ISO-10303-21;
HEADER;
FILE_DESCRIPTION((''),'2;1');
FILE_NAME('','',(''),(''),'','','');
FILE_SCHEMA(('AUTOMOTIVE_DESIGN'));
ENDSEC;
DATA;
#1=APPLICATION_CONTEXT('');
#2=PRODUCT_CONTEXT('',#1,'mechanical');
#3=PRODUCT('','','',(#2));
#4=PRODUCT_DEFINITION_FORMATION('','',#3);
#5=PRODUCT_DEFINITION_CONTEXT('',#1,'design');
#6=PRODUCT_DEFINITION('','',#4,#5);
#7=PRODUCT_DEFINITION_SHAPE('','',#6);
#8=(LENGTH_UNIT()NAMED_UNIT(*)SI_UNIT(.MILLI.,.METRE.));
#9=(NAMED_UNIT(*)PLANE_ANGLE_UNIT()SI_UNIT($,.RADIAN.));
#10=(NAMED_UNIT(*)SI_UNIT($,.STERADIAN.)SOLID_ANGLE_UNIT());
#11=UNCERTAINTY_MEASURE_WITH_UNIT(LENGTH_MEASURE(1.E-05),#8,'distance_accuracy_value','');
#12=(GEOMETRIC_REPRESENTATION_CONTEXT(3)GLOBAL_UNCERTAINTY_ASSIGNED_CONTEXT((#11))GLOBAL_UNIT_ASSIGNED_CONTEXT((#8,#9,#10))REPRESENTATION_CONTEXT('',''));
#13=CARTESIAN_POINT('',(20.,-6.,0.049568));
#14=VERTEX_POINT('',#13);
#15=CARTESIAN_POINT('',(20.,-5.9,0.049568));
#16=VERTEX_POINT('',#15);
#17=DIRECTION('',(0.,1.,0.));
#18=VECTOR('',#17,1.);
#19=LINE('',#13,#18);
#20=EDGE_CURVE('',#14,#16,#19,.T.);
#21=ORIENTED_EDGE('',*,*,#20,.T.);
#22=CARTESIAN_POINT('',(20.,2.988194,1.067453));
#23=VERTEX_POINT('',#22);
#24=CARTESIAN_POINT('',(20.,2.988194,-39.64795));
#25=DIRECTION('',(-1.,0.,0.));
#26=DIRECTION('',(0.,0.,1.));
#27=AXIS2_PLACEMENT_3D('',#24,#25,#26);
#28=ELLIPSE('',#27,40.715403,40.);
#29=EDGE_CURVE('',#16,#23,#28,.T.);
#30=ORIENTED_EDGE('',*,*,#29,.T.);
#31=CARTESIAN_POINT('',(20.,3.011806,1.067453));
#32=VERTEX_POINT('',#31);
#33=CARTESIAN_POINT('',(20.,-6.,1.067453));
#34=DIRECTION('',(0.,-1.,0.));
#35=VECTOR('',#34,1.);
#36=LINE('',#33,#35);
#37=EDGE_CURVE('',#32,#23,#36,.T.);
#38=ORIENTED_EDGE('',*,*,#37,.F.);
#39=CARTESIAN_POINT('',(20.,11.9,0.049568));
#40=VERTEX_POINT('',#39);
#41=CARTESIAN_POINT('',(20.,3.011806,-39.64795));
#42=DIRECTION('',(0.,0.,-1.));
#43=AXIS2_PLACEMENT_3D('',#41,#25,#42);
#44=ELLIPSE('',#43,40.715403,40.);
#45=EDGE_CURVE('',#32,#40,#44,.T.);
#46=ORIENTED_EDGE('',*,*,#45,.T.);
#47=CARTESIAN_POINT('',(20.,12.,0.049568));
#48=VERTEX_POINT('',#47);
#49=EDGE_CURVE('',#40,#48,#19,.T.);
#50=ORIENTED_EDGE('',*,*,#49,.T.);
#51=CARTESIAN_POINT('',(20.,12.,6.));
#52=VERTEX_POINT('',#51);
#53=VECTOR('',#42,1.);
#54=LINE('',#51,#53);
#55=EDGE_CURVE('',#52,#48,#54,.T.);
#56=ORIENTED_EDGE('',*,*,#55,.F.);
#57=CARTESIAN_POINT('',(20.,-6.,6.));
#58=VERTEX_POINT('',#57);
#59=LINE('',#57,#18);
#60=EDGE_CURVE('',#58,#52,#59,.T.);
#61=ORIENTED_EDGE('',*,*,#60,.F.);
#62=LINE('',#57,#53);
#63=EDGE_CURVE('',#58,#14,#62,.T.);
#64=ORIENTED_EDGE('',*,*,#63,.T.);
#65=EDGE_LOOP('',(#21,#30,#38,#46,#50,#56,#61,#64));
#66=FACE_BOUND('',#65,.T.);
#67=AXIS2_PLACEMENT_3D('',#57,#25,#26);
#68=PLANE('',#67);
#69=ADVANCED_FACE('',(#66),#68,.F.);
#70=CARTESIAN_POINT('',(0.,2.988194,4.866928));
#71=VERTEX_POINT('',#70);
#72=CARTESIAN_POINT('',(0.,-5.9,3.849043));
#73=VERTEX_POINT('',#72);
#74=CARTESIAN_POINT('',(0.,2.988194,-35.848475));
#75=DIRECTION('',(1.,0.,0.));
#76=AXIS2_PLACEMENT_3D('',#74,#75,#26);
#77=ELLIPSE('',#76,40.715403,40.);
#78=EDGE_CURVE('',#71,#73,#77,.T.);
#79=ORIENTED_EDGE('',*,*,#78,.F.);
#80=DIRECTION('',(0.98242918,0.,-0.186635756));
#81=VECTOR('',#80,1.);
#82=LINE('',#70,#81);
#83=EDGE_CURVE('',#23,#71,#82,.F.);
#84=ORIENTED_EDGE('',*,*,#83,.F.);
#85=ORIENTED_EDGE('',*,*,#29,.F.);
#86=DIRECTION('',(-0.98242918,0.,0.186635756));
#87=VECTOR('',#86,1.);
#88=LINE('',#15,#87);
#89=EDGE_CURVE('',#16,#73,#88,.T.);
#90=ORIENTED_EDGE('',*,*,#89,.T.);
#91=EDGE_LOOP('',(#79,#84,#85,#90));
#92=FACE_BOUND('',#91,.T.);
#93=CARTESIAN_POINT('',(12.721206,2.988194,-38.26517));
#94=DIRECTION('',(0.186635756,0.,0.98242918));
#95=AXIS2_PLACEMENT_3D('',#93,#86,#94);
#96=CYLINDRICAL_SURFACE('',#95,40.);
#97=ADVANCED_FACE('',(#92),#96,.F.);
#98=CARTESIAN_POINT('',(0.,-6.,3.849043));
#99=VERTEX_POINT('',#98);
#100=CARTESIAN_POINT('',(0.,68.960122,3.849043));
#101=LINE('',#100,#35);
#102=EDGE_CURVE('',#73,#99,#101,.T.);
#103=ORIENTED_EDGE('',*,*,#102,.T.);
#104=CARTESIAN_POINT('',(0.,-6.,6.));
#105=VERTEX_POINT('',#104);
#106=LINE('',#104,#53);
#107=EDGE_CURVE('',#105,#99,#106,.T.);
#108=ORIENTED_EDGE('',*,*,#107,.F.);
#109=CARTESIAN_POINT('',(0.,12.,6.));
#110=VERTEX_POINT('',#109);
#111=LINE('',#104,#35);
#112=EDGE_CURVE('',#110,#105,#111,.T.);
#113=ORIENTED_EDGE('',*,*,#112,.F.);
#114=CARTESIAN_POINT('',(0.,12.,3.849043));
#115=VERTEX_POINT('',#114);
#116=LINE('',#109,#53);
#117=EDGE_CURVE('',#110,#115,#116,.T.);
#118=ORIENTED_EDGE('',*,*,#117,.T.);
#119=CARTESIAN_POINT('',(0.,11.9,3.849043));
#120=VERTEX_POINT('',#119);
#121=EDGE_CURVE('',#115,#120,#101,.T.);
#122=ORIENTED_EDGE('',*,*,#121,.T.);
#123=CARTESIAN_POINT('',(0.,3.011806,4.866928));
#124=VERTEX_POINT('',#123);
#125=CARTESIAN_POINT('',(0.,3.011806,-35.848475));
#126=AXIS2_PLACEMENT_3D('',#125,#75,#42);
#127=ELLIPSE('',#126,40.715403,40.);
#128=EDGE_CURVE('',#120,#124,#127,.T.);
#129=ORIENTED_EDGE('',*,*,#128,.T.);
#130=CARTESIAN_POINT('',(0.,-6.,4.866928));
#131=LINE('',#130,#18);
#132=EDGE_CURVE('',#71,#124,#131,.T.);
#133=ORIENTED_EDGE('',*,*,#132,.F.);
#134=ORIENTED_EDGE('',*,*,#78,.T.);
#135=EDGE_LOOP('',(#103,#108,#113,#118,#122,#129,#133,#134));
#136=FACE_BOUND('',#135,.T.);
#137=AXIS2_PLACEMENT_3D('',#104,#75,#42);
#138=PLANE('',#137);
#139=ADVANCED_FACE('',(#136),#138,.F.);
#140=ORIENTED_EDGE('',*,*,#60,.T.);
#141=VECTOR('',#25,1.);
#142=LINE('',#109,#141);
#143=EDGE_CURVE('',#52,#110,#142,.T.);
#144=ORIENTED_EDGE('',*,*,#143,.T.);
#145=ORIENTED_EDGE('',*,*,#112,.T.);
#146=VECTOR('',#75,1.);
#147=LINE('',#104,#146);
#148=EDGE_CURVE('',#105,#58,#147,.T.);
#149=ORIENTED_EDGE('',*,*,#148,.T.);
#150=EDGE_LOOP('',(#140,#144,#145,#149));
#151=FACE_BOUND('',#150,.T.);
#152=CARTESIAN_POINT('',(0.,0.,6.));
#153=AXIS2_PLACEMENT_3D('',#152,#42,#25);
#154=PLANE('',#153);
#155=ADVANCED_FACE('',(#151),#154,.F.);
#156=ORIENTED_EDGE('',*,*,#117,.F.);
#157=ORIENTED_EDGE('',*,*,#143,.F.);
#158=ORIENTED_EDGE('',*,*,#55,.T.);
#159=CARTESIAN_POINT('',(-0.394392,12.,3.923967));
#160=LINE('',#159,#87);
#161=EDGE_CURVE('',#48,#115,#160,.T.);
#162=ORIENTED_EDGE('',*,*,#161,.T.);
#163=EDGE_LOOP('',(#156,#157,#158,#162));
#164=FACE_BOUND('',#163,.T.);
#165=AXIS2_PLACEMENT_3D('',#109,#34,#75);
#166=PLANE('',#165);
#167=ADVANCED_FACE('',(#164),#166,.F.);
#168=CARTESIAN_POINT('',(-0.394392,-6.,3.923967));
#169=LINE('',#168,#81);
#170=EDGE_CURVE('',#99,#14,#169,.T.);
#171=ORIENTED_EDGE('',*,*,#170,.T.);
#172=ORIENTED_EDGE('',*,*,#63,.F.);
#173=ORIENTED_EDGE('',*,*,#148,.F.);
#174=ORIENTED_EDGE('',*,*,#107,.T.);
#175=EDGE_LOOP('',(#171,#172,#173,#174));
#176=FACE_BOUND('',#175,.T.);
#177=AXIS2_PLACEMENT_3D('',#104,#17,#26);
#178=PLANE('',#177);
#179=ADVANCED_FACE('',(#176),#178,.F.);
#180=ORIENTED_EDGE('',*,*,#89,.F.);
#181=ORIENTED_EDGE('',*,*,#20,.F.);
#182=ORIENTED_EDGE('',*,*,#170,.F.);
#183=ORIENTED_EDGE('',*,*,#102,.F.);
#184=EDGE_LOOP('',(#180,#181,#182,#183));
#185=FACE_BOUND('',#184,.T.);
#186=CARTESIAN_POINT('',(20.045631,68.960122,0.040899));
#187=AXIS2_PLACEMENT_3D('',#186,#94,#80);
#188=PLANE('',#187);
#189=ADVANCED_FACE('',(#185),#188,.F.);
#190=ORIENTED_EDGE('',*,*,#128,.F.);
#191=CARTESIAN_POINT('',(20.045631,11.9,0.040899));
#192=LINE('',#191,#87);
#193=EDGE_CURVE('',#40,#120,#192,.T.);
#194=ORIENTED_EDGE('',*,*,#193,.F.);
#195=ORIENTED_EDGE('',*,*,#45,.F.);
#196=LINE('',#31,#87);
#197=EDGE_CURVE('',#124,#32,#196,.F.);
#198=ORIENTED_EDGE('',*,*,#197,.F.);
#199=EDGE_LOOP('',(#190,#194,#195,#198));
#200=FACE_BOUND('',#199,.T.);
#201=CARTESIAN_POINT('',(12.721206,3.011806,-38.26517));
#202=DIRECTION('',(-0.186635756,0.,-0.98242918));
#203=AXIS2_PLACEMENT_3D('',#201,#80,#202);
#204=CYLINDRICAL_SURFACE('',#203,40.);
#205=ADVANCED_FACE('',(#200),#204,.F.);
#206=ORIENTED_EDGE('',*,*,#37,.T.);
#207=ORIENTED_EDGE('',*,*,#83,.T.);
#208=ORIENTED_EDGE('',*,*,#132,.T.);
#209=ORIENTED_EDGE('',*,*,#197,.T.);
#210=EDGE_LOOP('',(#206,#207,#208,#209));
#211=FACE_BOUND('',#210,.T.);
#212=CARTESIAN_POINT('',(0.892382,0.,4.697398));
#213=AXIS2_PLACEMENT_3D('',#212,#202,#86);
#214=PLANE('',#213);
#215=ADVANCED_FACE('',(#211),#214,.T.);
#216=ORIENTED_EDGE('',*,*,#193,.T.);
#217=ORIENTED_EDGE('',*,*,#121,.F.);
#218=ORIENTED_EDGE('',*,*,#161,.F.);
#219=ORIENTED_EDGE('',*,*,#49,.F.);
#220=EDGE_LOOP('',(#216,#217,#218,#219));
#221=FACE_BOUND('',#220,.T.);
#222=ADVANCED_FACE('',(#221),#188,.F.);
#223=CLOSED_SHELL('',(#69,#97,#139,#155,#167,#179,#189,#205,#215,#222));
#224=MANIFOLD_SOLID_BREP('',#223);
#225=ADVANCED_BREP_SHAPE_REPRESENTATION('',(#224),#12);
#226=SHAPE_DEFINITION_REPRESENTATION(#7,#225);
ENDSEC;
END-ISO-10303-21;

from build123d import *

# Parameters (mm, degrees)
ESQUISSE1_W                  = 20
ESQUISSE1_H                  = 18
BOSS_EXTRU_1_DEPTH           = 6
ENL_V_MAT_EXTRU_1_DEPTH      = 28.568097504
ENL_V_MAT_EXTRU_1_DEPTH_BACK = 28.568097504
ESQUISSE4_W                  = 20.759147063
ESQUISSE4_H                  = 17.8
ENL_V_MAT_EXTRU_3_DEPTH      = 1
CONG_2_R                     = 40


with BuildPart() as part:
    # Esquisse1 → Boss.-Extru.1 (new body)
    with BuildSketch(Plane.XY):
        with Locations((10, 3)):
            Rectangle(ESQUISSE1_W, ESQUISSE1_H)
    extrude(amount=BOSS_EXTRU_1_DEPTH)

    # Esquisse2 → Enlèv. mat.-Extru.1 (cut, two sides: drawn at the far end of the back side and taken through both)
    with BuildSketch(Plane(origin=(0, 12, 0), x_dir=(1, 0, 0), z_dir=(0, 1, 0)).offset(-ENL_V_MAT_EXTRU_1_DEPTH_BACK)):
        Polygon((70.960283861, 9.63154869), (20.045630921, -0.0408989), (0, -3.849042594), (0, 0), (0, 51.825265329), (52.974270305, 140.916001049), (123.934554166, 98.72228441), align=None)
    extrude(amount=ENL_V_MAT_EXTRU_1_DEPTH + ENL_V_MAT_EXTRU_1_DEPTH_BACK, mode=Mode.SUBTRACT)

    # Esquisse4 → Enlèv. mat.-Extru.3 (cut)
    with BuildSketch(Plane(origin=(0.705746644, 0, 3.714969257), x_dir=(-0.9824291803850712, 0, 0.1866357562952965), z_dir=(-0.1866357562952965, 0, -0.9824291803850712))):
        with Locations((-9.259758994, 3)):
            Rectangle(ESQUISSE4_W, ESQUISSE4_H)
    extrude(amount=-ENL_V_MAT_EXTRU_3_DEPTH, mode=Mode.SUBTRACT)

    # Congé2
    # the kernel refuses this fillet: 40 mm, written as the material it adds along each edge
    with BuildSketch(Plane(origin=(41.830053891, 11.9, -3.079684565), x_dir=(0, -1, 0), z_dir=(-0.9824291803850712, 0, 0.1866357562952965))) as cong_2_piece_1_section:
        with BuildLine():
            CenterArc((8.888194417, -40), CONG_2_R, 90, 12.838568141)
            Line((0, -1), (0, 0))
            Line((0, 0), (8.888194417, 0))
        make_face()
    cong_2_piece_1 = extrude(amount=64.798673587, mode=Mode.PRIVATE)
    cong_2_piece_1 = split(cong_2_piece_1, bisect_by=Plane(origin=(20, 11.9, -3.079684565), z_dir=(-1, 0, 0)), keep=Keep.TOP, mode=Mode.PRIVATE)
    cong_2_piece_1 = split(cong_2_piece_1, bisect_by=Plane(origin=(0, 11.9, -3.079684565), z_dir=(1, 0, 0)), keep=Keep.TOP, mode=Mode.PRIVATE)
    add(cong_2_piece_1)
    with BuildSketch(Plane(origin=(-21.830053891, -5.9, 9.014064887), x_dir=(-0.1866357562952965, 0, -0.9824291803850712), z_dir=(0.9824291803850712, 0, -0.1866357562952965))) as cong_2_piece_2_section:
        with BuildLine():
            CenterArc((40, 8.888194417), CONG_2_R, 180, 12.838568141)
            Line((0, 8.888194417), (0, 0))
            Line((0, 0), (1, 0))
        make_face()
    cong_2_piece_2 = extrude(amount=64.798673587, mode=Mode.PRIVATE)
    cong_2_piece_2 = split(cong_2_piece_2, bisect_by=Plane(origin=(20, -5.9, 9.014064887), z_dir=(-1, 0, 0)), keep=Keep.TOP, mode=Mode.PRIVATE)
    cong_2_piece_2 = split(cong_2_piece_2, bisect_by=Plane(origin=(0, -5.9, 9.014064887), z_dir=(1, 0, 0)), keep=Keep.TOP, mode=Mode.PRIVATE)
    add(cong_2_piece_2)


solid = part.part
